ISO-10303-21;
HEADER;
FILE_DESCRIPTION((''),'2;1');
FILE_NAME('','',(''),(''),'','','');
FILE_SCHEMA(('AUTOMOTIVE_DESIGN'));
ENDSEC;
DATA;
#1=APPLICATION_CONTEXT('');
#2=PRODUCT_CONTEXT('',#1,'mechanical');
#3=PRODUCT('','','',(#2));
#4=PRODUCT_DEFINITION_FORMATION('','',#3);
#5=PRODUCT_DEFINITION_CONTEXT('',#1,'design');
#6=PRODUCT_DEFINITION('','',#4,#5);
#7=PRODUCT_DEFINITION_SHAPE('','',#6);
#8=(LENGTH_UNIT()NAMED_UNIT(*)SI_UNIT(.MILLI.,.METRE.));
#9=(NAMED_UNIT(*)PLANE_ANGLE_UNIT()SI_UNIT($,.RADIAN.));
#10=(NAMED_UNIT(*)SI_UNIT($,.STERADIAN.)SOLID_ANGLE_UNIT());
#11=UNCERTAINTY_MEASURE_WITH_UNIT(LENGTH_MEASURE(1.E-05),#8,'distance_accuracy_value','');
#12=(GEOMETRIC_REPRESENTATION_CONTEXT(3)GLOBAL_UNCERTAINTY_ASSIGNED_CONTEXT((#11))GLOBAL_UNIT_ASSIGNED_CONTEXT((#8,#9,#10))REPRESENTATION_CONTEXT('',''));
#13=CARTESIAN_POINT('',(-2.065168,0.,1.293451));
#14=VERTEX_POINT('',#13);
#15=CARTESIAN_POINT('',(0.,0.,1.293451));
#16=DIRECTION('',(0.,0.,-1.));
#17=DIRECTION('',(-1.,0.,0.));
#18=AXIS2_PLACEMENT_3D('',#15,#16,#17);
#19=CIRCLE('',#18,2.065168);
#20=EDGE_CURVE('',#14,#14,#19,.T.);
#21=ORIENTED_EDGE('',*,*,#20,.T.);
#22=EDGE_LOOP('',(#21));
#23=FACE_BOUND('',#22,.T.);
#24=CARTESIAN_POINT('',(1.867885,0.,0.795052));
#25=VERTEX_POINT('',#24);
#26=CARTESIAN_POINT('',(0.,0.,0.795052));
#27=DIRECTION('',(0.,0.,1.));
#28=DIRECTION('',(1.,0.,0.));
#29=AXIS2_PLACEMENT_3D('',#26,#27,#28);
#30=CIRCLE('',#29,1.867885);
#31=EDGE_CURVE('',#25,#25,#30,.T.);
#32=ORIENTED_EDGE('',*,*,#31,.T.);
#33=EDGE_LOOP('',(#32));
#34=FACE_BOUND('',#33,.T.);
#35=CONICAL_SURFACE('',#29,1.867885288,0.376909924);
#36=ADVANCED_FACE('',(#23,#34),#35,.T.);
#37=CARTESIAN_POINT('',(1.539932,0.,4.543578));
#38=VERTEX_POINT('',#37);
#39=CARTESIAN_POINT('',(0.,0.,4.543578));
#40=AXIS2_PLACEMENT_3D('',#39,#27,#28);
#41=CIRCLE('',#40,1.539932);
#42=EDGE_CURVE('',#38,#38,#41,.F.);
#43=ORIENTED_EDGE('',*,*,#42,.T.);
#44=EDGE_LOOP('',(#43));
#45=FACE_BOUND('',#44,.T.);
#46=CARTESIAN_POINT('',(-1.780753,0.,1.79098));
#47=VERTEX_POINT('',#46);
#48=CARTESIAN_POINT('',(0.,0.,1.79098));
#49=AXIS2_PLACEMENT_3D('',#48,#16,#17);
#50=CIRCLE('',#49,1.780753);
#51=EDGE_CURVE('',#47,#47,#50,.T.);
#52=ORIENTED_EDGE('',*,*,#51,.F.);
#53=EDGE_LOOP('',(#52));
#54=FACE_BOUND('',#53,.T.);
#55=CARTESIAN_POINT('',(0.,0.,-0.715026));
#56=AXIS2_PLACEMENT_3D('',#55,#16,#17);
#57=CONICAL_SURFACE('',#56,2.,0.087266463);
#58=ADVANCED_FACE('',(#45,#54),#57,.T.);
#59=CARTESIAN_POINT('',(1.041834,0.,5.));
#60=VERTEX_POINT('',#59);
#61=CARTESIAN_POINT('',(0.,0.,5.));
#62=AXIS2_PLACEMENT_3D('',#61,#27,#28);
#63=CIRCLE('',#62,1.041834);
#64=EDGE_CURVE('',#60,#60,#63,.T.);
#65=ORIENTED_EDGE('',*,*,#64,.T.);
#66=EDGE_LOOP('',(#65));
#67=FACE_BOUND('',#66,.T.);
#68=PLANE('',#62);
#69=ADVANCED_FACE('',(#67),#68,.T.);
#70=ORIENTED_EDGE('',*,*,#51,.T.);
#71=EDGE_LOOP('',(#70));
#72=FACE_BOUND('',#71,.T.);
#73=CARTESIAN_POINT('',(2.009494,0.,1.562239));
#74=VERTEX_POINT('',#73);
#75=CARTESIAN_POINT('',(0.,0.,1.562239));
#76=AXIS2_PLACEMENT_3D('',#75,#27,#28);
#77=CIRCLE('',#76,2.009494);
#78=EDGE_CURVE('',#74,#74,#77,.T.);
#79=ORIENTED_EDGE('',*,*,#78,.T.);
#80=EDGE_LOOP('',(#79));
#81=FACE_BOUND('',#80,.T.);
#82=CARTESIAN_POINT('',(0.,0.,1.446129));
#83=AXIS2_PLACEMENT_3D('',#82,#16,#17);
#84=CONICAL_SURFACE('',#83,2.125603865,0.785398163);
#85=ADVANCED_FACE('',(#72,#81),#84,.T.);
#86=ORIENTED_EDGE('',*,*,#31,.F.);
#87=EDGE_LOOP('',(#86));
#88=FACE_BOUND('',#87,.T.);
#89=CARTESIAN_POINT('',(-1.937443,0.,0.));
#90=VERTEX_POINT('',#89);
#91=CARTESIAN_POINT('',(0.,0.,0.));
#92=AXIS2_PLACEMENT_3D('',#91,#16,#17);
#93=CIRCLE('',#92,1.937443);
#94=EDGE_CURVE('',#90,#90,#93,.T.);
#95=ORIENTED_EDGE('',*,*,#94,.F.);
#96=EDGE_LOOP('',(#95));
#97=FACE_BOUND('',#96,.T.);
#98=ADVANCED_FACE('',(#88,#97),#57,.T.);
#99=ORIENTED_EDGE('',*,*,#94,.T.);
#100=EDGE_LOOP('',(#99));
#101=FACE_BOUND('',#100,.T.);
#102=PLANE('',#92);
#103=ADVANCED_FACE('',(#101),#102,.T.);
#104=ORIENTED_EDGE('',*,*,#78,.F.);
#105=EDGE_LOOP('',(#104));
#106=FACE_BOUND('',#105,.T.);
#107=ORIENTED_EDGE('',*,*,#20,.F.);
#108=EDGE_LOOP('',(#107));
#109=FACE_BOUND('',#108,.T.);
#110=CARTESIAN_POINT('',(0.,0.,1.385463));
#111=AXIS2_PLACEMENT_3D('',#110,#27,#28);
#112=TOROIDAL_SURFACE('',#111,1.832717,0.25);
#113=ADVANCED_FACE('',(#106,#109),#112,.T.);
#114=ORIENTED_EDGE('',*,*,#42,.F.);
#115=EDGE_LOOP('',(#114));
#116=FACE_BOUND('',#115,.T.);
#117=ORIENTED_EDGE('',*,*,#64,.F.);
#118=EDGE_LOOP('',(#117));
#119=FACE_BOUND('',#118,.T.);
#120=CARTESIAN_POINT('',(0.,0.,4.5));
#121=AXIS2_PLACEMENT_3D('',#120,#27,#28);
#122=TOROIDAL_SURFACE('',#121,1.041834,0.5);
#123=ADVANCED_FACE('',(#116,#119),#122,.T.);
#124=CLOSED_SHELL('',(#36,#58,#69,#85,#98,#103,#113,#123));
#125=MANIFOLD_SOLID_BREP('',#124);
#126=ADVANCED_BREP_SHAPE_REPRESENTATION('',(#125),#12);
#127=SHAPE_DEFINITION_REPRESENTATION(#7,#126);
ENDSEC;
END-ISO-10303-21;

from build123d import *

# Parameters (mm, degrees)
SKETCH1_W       = 2
SKETCH1_H       = 5
CHAMFER1_SIZE   = 5.715026151
CHAMFER1_SIZE_2 = 0.5
FILLET1_R       = 0.5
FILLET2_R       = 0.25


with BuildPart() as part:
    # Sketch1 → Revolve1 (revolve)
    with BuildSketch(Plane.YZ, mode=Mode.PRIVATE) as revolve1_sk:
        with Locations((1, 2.5)):
            Rectangle(SKETCH1_W, SKETCH1_H)
    revolve(revolve1_sk.sketch.rotate(Axis((0, 0, 0), (0, 0, 1)), 90), axis=Axis((0, 0, 0), (0, 0, 1)))

    # Chamfer1
    # the kernel refuses this chamfer: 5.715026151, 0.5 mm, written as the material it takes off along each edge
    with BuildSketch(Plane(origin=(0, 0, 5), x_dir=(-1, 0, 0), z_dir=(0, 1, 0))) as chamfer1_piece_1:
        Polygon((2, -CHAMFER1_SIZE), (2 - CHAMFER1_SIZE_2, 0), (2, 0), align=None)
    revolve(axis=Axis((0, 0, 5), (0, 0, 1)), mode=Mode.SUBTRACT)

    # Fillet1
    fillet1_edges = [part.edges().sort_by_distance(p)[0] for p in [
        (1.5, 0, 5),
    ]]
    fillet(fillet1_edges, radius=FILLET1_R)

    # Sketch2 → Revolve3 (revolve)
    with BuildSketch(Plane.YZ, mode=Mode.PRIVATE) as revolve3_sk:
        Polygon((1.867885288, 0.795051912), (2.125603865, 1.446129176), (1.780752855, 1.790980186), align=None)
    revolve(revolve3_sk.sketch.rotate(Axis((0, 0, 0), (0, 0, 1)), 90), axis=Axis((0, 0, 0), (0, 0, 1)))

    # Fillet2
    fillet2_edges = [part.edges().sort_by_distance(p)[0] for p in [
        (2.125603865, 0, 1.446129176),
    ]]
    fillet(fillet2_edges, radius=FILLET2_R)


solid = part.part
